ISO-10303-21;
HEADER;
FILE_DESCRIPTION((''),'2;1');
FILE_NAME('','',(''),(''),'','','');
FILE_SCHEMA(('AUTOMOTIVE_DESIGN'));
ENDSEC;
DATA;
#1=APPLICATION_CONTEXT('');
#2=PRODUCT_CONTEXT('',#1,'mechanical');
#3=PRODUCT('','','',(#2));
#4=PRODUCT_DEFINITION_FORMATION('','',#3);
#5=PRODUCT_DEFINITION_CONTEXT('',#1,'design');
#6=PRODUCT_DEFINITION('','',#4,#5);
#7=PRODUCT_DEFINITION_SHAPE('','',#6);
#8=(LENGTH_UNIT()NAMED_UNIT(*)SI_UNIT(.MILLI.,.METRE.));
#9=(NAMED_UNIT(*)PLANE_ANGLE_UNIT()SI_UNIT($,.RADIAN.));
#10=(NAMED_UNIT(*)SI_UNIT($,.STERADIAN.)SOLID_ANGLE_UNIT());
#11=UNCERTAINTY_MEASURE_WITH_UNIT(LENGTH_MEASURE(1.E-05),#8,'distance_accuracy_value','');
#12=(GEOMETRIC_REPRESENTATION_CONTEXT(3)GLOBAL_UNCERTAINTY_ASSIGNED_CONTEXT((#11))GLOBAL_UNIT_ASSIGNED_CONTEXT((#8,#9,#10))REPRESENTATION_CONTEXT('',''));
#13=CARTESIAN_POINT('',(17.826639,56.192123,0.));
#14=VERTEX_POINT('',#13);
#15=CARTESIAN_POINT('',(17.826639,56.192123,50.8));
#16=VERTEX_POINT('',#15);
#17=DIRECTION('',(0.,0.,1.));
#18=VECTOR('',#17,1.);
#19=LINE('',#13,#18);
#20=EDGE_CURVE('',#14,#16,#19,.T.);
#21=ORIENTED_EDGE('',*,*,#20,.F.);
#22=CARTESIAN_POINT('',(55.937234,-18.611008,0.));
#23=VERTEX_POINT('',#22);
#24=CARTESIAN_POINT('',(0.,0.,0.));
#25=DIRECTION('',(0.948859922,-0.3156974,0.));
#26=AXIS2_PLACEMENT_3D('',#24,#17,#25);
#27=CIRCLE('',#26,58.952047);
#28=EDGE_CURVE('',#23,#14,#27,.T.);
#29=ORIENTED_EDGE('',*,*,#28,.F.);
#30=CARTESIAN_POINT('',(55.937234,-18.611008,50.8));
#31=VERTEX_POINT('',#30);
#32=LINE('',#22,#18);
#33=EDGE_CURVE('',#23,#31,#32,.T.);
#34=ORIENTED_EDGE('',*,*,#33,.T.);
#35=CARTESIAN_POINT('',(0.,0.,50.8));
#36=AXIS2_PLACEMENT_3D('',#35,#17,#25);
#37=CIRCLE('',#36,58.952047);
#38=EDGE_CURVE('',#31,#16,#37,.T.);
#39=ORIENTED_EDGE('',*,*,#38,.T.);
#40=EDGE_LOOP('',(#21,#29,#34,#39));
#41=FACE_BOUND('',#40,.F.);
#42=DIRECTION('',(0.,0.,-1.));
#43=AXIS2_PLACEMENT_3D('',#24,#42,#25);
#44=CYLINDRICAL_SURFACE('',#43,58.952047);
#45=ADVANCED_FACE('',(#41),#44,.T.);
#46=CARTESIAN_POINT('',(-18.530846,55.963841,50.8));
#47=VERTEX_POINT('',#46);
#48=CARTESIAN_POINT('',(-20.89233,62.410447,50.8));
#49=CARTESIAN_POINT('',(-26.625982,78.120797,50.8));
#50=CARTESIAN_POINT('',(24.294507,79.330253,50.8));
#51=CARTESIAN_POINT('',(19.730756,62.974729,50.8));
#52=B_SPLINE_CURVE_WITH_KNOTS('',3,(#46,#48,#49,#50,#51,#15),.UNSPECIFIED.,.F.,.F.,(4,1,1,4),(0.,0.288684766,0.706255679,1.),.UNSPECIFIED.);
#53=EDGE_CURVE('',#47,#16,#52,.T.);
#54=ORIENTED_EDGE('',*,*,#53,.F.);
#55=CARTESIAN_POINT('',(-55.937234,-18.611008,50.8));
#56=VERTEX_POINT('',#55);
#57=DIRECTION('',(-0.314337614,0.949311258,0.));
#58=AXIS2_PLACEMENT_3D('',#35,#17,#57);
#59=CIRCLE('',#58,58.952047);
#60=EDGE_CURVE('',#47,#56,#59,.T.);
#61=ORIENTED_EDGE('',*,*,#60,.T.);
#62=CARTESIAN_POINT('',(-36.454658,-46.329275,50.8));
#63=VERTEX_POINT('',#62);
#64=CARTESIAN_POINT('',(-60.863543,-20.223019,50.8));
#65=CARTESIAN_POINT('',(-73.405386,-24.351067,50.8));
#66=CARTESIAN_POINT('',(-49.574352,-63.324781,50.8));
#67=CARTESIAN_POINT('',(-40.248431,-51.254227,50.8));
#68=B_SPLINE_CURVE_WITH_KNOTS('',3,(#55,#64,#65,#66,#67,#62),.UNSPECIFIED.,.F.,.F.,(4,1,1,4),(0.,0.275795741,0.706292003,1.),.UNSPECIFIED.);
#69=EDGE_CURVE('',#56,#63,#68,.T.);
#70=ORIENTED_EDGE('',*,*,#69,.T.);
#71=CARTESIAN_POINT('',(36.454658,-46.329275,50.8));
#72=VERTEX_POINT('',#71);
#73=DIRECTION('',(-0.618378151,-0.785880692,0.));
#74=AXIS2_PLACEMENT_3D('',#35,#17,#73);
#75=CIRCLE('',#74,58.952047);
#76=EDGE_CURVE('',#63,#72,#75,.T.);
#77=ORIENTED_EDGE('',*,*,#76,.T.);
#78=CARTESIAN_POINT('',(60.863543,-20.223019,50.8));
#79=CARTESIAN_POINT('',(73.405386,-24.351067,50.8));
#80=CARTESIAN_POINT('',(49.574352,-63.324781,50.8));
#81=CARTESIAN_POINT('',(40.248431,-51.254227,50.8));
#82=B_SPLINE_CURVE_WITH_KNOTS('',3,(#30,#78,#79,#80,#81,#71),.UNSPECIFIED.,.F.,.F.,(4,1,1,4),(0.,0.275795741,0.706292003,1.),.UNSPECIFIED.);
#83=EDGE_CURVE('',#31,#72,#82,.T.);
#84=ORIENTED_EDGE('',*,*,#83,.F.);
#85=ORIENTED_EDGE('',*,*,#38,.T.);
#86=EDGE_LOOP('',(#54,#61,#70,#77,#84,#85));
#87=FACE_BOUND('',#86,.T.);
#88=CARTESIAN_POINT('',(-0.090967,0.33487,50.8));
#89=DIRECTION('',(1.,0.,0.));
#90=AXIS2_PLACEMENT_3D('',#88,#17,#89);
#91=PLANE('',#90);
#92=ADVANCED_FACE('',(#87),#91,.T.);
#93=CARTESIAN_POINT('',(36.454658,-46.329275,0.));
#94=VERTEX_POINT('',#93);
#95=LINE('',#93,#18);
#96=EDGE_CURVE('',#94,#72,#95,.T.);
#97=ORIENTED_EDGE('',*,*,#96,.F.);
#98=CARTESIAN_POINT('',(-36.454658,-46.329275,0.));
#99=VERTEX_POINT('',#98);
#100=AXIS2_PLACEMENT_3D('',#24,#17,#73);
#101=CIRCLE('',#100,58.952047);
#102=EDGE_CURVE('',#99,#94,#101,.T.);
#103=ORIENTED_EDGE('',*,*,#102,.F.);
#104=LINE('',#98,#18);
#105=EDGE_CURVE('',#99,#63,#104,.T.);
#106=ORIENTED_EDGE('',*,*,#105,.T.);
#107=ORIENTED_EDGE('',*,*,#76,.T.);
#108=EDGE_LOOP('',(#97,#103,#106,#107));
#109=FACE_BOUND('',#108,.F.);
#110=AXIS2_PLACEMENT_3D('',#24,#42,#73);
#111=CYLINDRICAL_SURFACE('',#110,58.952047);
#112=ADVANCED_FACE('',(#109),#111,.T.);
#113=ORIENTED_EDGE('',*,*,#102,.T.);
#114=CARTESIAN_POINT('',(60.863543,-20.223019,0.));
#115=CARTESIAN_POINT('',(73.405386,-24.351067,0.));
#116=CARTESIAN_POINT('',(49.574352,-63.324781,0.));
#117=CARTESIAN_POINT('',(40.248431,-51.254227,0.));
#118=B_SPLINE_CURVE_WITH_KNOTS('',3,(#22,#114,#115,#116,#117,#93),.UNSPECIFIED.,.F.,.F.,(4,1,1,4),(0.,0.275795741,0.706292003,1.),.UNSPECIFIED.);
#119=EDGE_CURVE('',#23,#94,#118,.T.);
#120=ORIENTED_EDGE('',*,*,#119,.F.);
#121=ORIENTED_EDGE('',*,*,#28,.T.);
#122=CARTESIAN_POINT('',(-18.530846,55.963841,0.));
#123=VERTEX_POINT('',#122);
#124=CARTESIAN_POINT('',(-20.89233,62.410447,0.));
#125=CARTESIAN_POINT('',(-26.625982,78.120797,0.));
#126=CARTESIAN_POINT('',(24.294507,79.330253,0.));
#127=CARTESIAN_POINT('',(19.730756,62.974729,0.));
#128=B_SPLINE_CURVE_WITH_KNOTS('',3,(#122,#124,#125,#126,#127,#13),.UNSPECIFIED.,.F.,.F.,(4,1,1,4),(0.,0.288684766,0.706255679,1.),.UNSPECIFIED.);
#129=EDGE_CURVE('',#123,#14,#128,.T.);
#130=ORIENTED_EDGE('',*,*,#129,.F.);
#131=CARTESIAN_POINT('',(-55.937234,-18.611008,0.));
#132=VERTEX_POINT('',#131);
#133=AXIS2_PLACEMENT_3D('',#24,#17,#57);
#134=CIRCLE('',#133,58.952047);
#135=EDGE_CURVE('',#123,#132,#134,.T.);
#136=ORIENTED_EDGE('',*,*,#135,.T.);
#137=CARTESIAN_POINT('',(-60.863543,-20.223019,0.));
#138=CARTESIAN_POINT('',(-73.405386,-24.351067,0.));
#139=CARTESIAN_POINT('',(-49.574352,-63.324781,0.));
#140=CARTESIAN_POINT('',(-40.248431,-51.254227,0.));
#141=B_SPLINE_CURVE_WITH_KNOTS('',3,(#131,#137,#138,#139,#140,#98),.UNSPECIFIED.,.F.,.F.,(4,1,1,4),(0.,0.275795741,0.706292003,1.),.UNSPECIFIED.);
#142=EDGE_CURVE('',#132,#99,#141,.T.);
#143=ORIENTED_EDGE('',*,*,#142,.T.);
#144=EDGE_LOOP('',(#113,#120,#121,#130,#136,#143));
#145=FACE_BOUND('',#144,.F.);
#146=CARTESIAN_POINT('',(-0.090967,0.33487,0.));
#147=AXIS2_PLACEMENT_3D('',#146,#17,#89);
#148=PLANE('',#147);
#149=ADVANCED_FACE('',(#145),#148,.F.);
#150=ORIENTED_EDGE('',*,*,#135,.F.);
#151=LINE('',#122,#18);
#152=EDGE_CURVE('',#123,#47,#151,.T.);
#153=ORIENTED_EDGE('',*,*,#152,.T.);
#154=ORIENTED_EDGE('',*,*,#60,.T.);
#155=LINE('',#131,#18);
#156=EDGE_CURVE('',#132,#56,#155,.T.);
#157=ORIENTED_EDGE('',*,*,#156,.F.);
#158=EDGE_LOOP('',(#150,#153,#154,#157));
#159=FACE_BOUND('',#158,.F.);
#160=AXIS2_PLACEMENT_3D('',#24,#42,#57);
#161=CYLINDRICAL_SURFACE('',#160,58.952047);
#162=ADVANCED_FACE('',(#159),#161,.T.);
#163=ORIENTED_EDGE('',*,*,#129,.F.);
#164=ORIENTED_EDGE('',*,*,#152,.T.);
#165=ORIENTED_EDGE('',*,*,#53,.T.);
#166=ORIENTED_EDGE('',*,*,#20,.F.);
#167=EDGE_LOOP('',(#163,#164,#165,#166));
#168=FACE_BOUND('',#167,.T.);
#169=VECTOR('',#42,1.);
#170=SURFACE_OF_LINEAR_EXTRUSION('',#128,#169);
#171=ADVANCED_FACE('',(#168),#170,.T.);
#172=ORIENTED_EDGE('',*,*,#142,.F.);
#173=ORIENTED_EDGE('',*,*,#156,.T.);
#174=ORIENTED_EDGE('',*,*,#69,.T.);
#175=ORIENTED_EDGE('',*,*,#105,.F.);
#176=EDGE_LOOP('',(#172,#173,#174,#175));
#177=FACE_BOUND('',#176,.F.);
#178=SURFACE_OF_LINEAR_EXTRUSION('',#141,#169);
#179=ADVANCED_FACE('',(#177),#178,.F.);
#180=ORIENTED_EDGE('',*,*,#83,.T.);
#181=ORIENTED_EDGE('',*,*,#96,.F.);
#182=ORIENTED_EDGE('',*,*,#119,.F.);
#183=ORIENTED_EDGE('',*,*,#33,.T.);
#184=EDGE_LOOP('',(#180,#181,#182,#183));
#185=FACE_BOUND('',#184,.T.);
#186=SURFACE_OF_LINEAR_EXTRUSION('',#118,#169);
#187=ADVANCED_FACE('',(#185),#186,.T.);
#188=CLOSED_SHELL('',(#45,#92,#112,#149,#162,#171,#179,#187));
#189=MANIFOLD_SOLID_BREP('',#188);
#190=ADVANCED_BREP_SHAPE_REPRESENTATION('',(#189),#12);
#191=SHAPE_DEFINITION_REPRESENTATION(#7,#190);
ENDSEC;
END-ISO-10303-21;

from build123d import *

# Parameters (mm, degrees)
F1_DEPTH = 50.8


with BuildPart() as f1:
    # F0 (on Top) → F1 (new body)
    with BuildSketch(Plane.XY):
        with BuildLine():
            add(Edge.make_bspline(
                [(-55.9372343089, -18.6110077969), (-60.8635430407, -20.2230194958), (-73.4053859661, -24.3510672229), (-49.5743515525, -63.3247808232), (-40.2484306998, -51.254227378), (-36.4546575654, -46.3292751415)],
                knots=[0, 0, 0, 0, 0.2757957407, 0.7062920031, 1, 1, 1, 1], degree=3))
            ThreePointArc((-36.4546575654, -46.3292751415), (0, -58.9520465577), (36.4546575654, -46.3292751415))
            add(Edge.make_bspline(
                [(55.9372343089, -18.6110077969), (60.8635430407, -20.2230194958), (73.4053859661, -24.3510672229), (49.5743515525, -63.3247808232), (40.2484306998, -51.254227378), (36.4546575654, -46.3292751415)],
                knots=[0, 0, 0, 0, 0.2757957407, 0.7062920031, 1, 1, 1, 1], degree=3))
            ThreePointArc((55.9372343089, -18.6110077969), (52.5276532647, 26.7617158615), (17.8266388345, 56.1921234801))
            add(Edge.make_bspline(
                [(-18.5308456371, 55.9638414811), (-20.8923301584, 62.4104470065), (-26.6259819502, 78.1207966464), (24.2945065208, 79.3302533373), (19.7307556094, 62.9747286546), (17.8266388345, 56.1921234801)],
                knots=[0, 0, 0, 0, 0.2886847661, 0.7062556792, 1, 1, 1, 1], degree=3))
            ThreePointArc((-18.5308456371, 55.9638414811), (-52.694646492, 26.4313833241), (-55.9372343089, -18.6110077969))
        make_face()
    extrude(amount=F1_DEPTH)


solid = f1.part
